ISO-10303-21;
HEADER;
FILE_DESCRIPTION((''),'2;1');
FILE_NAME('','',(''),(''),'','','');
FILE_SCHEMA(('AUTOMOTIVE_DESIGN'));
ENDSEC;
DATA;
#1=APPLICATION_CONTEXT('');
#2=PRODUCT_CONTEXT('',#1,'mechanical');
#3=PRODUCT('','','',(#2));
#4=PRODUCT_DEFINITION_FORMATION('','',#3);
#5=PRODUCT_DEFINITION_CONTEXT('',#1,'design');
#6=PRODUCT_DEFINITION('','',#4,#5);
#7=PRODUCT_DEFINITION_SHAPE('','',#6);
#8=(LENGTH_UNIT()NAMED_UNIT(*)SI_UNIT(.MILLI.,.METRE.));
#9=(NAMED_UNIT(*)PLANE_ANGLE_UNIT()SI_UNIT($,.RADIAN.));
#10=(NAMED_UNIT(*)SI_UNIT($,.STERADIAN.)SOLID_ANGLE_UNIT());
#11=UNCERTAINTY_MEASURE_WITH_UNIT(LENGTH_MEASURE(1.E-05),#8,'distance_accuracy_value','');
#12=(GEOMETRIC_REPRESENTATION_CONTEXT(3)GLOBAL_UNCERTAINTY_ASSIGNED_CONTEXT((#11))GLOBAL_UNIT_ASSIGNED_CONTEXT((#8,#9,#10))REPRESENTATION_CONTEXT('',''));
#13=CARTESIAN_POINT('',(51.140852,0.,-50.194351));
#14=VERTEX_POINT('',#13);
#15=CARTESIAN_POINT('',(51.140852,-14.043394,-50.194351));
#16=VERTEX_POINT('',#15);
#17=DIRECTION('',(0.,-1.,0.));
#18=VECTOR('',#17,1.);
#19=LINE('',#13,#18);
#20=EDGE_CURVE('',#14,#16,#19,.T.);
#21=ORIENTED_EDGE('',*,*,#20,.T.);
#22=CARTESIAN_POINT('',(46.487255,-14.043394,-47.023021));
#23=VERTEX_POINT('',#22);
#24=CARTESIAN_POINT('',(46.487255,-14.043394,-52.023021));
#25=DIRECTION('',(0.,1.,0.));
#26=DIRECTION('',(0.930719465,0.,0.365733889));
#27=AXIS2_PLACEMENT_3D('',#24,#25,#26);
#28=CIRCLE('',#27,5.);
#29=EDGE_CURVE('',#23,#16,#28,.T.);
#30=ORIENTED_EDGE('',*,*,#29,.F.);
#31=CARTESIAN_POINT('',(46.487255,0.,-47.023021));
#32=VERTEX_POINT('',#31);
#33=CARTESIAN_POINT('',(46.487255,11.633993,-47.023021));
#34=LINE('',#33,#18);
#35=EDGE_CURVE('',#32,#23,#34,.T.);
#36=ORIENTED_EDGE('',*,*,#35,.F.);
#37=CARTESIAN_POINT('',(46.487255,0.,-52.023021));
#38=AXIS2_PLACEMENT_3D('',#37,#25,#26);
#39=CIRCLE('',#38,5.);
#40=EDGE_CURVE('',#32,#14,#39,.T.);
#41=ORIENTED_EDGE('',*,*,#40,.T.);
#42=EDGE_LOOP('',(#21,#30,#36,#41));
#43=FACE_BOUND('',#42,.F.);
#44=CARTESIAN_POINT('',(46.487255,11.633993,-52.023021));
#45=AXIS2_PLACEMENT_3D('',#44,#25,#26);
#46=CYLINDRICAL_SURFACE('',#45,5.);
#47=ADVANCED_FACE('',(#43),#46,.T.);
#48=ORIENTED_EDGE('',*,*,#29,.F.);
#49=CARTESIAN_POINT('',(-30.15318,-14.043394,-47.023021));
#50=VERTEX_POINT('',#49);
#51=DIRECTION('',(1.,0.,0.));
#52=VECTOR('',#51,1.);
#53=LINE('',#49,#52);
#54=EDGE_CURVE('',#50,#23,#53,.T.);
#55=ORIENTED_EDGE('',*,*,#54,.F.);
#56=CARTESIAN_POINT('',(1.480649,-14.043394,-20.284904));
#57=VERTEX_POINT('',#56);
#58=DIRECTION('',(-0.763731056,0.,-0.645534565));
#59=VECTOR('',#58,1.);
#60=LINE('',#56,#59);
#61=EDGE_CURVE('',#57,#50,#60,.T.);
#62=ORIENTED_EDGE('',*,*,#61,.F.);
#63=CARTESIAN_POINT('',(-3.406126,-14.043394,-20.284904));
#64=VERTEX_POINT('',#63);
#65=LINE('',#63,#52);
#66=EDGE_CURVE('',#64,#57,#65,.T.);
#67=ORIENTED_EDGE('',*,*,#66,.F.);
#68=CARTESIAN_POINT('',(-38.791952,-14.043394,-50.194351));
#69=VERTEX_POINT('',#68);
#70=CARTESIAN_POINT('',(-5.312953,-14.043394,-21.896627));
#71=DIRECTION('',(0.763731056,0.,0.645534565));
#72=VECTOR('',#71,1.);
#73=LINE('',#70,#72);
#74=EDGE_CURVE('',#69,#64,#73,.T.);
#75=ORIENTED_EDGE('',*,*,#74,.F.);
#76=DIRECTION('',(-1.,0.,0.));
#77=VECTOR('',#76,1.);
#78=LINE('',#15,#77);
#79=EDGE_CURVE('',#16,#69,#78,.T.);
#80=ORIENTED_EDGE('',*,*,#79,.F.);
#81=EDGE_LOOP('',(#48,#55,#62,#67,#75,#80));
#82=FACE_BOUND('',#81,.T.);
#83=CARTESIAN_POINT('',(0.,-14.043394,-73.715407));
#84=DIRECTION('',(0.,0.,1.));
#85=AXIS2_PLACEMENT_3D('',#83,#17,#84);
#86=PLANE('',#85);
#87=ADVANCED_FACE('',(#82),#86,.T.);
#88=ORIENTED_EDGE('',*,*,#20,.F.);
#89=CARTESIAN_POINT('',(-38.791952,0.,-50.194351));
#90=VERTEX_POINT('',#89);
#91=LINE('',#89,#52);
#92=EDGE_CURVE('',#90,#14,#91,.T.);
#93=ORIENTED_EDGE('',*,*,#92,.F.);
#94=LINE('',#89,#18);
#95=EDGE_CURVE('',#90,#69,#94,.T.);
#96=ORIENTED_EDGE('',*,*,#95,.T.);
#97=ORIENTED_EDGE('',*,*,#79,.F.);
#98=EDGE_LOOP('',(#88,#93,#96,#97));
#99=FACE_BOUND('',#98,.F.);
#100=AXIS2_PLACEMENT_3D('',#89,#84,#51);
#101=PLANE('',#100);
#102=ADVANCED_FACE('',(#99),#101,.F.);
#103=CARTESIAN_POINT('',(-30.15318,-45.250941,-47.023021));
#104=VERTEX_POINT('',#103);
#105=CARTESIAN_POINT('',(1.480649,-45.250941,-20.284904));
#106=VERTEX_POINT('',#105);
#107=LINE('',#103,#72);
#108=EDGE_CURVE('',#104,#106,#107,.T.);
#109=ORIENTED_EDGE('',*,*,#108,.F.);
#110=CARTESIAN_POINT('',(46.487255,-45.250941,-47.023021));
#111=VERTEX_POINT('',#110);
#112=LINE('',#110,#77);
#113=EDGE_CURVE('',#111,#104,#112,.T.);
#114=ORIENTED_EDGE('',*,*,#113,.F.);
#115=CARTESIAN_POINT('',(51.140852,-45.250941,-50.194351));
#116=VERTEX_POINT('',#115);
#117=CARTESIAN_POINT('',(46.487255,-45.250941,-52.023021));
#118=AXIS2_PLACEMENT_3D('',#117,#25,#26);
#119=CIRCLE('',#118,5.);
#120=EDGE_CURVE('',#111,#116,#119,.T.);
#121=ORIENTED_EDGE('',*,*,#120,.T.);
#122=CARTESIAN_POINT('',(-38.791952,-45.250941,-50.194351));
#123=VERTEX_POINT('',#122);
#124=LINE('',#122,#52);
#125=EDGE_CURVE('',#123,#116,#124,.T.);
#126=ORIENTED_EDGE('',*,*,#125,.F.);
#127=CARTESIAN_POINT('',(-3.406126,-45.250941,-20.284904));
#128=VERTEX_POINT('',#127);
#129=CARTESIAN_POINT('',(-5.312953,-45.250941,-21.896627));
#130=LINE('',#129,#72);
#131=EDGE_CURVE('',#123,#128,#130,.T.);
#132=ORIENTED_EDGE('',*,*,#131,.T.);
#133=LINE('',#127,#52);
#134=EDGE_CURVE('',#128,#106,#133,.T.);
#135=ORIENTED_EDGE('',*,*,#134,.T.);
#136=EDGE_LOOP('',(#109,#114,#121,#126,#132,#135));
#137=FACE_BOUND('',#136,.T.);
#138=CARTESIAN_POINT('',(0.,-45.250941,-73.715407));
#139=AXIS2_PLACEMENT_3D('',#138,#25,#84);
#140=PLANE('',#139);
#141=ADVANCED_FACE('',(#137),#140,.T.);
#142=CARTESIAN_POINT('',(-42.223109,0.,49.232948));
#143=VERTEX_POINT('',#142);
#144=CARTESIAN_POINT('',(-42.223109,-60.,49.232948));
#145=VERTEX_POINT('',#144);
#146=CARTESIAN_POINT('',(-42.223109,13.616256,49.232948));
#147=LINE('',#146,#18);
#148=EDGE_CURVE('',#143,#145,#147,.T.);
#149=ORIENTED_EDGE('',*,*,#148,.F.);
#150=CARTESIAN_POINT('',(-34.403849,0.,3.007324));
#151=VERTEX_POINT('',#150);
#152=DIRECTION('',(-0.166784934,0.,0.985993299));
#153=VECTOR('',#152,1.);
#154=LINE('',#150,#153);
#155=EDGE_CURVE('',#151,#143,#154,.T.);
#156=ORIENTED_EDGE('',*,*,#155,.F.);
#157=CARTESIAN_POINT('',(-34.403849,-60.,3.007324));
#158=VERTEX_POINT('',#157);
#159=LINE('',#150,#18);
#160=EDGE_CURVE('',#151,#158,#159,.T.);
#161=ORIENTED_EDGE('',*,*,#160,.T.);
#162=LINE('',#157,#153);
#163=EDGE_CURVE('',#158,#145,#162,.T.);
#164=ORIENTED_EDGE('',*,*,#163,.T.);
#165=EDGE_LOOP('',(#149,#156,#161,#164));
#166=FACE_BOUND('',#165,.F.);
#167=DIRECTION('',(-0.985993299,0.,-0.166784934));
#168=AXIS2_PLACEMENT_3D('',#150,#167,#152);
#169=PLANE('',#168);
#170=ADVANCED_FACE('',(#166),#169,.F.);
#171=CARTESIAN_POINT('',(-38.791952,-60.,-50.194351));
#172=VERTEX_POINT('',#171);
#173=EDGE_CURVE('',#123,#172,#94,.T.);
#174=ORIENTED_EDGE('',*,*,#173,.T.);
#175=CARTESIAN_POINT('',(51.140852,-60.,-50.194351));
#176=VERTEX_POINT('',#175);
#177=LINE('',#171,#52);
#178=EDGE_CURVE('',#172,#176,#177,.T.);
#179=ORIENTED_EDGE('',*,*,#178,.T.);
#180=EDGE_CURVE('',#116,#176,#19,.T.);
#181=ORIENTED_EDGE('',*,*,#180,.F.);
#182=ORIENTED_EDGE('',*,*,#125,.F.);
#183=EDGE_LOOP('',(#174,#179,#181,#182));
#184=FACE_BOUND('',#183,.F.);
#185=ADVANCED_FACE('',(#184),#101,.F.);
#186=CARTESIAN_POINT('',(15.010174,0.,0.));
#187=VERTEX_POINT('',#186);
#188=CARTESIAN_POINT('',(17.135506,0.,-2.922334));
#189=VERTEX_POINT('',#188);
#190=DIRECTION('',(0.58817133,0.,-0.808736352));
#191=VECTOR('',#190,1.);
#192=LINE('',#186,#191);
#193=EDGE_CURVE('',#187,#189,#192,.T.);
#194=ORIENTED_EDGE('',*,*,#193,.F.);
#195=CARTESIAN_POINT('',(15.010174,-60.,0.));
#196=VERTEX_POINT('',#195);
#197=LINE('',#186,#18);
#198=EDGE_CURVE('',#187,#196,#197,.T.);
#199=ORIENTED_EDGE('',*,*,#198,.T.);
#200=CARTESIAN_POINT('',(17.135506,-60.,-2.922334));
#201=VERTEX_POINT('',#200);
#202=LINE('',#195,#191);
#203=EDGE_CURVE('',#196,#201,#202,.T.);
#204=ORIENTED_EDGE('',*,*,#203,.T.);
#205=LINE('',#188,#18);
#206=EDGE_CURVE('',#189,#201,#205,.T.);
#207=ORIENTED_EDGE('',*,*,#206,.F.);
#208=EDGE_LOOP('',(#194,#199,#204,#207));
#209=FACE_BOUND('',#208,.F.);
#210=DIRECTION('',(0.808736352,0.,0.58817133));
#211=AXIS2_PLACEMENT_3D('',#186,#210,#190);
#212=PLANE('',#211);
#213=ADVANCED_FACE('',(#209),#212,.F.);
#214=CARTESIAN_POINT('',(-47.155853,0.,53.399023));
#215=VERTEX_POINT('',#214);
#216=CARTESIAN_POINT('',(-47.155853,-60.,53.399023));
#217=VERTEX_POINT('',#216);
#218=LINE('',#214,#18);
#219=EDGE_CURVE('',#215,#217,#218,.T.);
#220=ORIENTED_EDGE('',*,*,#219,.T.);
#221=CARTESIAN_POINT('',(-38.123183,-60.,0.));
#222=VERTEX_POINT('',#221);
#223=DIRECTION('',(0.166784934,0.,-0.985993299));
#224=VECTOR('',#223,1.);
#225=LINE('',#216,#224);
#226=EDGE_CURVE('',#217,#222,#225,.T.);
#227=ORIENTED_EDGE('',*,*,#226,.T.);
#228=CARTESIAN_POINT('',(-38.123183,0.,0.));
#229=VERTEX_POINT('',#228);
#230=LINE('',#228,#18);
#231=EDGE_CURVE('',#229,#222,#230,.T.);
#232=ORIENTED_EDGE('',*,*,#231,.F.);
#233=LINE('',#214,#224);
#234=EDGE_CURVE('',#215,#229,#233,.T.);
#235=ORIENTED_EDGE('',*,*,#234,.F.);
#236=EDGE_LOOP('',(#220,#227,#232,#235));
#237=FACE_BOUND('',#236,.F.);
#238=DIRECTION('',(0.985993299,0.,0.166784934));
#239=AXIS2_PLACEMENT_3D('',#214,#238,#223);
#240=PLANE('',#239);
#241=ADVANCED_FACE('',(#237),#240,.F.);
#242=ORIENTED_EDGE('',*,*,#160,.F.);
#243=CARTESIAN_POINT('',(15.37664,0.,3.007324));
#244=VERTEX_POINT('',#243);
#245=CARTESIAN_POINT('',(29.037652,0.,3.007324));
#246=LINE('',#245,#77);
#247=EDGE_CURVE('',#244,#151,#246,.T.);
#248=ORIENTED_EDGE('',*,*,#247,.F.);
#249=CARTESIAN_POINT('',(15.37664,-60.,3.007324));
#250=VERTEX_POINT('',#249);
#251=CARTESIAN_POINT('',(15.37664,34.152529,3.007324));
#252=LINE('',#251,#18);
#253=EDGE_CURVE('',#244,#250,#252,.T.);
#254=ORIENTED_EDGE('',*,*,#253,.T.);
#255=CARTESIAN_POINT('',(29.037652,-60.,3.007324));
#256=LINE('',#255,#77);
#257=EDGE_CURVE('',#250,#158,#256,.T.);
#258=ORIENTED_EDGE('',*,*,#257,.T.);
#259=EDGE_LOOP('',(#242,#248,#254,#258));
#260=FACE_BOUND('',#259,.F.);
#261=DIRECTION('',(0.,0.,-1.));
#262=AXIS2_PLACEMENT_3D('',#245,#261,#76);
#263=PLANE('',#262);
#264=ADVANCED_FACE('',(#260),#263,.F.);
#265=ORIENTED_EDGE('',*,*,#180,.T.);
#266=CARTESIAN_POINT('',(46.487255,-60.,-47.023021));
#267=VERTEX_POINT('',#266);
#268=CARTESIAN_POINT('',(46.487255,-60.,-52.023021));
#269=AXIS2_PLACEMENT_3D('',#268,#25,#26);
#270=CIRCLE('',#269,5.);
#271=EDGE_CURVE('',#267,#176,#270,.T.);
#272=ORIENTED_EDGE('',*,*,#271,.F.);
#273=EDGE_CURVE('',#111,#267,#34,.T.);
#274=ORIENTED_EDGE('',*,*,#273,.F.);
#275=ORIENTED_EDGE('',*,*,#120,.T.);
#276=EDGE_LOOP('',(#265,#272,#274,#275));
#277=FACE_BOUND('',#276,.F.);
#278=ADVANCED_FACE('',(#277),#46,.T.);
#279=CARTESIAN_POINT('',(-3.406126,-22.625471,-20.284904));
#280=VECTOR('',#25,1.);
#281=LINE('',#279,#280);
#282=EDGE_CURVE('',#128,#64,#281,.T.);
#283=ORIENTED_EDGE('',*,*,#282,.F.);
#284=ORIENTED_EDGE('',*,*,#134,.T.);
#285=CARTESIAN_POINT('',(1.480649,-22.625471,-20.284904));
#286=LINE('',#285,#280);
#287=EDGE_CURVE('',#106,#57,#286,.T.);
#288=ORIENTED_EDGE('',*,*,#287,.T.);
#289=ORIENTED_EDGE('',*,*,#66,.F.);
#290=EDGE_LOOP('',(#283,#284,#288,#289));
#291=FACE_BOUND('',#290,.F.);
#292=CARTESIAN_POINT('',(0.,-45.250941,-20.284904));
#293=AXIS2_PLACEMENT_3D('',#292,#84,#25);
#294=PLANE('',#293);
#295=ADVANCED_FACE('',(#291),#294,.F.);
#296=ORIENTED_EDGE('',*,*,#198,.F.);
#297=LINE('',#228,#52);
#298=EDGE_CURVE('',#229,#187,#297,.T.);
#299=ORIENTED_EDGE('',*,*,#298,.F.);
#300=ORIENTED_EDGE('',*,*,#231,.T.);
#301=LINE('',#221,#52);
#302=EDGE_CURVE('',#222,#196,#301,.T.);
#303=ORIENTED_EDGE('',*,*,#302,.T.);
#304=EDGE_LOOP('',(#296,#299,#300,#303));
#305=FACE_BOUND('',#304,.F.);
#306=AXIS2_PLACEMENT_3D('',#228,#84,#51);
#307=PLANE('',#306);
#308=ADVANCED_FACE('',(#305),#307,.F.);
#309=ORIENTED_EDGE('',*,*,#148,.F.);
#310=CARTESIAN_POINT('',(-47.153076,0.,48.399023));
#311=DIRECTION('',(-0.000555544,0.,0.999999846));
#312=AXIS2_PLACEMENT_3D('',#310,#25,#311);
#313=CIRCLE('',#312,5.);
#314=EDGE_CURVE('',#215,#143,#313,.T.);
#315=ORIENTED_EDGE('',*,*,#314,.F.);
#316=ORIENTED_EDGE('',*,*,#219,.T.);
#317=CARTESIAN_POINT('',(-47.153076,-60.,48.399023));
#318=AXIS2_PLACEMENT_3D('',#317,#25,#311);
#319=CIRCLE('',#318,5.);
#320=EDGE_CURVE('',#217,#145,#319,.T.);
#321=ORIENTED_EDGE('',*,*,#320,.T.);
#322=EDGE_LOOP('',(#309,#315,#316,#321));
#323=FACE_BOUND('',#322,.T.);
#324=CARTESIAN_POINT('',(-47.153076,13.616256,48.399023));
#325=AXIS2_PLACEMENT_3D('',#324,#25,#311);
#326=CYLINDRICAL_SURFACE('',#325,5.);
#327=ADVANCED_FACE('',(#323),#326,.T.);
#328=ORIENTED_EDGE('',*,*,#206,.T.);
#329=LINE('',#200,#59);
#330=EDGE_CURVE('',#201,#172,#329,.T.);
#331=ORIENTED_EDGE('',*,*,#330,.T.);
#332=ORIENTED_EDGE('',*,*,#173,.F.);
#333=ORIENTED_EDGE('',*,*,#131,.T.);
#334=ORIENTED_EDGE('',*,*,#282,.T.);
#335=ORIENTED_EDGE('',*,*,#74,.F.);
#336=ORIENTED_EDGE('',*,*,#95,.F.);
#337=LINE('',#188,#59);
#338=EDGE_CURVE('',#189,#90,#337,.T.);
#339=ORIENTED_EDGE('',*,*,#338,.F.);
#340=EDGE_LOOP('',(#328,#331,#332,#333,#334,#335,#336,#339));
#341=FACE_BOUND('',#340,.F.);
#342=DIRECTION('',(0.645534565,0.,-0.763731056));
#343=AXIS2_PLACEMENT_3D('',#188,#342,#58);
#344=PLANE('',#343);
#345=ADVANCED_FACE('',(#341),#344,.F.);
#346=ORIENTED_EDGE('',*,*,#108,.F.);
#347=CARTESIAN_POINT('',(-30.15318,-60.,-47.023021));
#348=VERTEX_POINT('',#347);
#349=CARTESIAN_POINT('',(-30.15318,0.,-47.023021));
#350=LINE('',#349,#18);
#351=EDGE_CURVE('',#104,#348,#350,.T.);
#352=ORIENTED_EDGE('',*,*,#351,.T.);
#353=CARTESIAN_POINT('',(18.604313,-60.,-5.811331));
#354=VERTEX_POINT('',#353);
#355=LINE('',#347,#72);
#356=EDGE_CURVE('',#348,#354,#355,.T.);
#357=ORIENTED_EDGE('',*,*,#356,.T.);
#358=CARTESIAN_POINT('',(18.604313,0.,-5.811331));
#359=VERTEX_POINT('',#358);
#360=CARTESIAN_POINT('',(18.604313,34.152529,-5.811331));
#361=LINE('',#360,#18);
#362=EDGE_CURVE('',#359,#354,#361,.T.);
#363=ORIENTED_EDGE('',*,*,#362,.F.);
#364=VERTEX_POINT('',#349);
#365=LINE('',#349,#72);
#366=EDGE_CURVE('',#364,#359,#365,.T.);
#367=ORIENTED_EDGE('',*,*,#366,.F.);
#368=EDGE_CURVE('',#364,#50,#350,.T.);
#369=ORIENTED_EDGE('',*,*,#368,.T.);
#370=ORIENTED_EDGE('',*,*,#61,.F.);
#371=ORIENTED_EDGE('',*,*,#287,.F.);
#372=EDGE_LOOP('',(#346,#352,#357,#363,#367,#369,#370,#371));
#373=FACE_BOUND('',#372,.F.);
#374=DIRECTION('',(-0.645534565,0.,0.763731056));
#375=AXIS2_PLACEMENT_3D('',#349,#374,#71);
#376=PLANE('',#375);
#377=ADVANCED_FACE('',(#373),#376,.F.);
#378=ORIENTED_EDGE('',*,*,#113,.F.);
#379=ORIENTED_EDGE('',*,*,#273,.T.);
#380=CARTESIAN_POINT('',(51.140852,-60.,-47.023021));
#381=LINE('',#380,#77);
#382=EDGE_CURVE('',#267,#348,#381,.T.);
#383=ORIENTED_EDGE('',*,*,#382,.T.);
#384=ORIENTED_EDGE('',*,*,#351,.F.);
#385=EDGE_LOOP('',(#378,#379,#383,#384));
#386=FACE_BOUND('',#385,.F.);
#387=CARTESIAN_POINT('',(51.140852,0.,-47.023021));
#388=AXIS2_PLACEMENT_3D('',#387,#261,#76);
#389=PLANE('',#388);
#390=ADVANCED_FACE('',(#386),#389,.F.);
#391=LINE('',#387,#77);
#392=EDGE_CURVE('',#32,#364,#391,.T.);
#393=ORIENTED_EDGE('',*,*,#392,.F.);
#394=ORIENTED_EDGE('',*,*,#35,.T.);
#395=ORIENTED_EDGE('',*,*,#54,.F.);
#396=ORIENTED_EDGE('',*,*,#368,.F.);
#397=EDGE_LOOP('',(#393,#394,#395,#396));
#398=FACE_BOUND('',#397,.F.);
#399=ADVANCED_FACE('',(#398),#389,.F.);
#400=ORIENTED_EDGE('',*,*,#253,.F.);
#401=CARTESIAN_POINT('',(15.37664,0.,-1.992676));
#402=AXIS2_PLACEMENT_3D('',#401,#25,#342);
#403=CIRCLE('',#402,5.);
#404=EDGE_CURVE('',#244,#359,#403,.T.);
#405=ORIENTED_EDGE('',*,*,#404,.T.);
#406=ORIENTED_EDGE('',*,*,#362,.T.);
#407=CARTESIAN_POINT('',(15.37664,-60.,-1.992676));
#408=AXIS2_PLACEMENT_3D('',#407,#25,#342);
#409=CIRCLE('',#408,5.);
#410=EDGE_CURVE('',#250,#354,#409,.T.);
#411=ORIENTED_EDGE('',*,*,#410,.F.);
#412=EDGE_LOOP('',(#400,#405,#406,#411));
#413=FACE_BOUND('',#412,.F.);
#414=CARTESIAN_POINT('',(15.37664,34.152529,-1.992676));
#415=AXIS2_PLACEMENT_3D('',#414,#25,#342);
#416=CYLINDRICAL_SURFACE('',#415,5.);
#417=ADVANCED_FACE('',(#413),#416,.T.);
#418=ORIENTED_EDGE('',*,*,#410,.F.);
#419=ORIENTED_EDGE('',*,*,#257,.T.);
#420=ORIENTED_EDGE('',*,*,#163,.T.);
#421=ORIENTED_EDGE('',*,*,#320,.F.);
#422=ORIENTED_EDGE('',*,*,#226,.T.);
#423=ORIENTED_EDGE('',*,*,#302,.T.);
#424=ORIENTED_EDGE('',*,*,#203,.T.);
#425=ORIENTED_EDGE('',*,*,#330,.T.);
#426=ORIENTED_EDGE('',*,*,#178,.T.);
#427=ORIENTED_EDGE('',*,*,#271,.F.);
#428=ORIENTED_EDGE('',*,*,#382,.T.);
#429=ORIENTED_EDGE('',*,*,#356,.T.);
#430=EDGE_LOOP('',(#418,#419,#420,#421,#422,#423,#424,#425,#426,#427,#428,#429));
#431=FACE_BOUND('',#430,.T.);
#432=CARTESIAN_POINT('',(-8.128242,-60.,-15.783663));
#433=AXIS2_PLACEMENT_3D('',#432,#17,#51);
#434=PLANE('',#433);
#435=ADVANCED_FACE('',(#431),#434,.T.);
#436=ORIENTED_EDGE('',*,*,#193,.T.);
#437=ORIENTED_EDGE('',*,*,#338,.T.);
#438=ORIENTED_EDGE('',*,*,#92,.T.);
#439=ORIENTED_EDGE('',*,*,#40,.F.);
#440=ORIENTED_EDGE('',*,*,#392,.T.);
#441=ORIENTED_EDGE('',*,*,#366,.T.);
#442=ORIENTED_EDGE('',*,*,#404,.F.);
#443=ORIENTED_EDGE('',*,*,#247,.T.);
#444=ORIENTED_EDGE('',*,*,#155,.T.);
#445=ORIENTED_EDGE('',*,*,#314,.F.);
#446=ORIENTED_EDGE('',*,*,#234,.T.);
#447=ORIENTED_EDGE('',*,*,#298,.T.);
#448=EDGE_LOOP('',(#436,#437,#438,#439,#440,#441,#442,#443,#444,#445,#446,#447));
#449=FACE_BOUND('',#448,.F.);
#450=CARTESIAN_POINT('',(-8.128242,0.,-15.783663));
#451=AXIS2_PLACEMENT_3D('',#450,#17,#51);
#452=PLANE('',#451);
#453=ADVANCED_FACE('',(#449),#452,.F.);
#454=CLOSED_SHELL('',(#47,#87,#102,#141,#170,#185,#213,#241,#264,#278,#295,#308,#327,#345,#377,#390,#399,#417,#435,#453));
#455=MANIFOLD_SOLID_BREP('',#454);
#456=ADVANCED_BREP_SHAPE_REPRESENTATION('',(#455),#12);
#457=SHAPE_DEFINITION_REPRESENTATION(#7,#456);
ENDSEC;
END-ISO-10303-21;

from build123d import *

# Parameters (mm, degrees)
F1_DEPTH      = 60
F2_T1_DEPTH   = 128.3050587773
F2_T3_DEPTH   = 87.2325127198
F2_T5_DEPTH   = 83.2679866238
F3_W          = 31.2075465918
F3_H          = 53.4305032343
F4_DEPTH      = 47.1568533609
F4_DEPTH_BACK = 100


# Not quite as in the source:
# - a fillet or chamfer that OpenCascade refuses, or shapes differently, is made with other operations: its cross-section is extruded or revolved along the edge and cut away or added


with BuildPart() as f1:
    # F0 (on Front) → F1 (new body)
    with BuildSketch(Plane.XZ):
        Polygon((-43.1315037153, 54.6031631236), (-47.1558533609, 53.3990226686), (-38.1231829524, 0), (15.0101743639, 0), (17.1355064958, -2.9223344754), (-27.4965111166, -40.6470149755), (-38.7919515192, -50.1943512397), (51.1408522725, -50.1943512397), (51.1408522725, -47.0230206847), (-30.1531795412, -47.0230206847), (19.4947316054, -5.0587160063), (29.0376522148, 3.0073238074), (-34.4038493931, 3.0073238074), align=None)
    extrude(amount=F1_DEPTH)

    # F2: fillet of radius 5 on 3 edges, made by hand

    # F2_s2 → F2_t1 (cut)
    with BuildSketch(Plane.XZ.offset(-34.1525293886)):
        with BuildLine():
            ThreePointArc((18.6043132835, -5.8113314716), (20.0720252356, -0.274141409), (15.3766404593, 3.0073238074))
            Line((15.3766404593, 3.0073238074), (29.0376522148, 3.0073238074))
            Line((29.0376522148, 3.0073238074), (18.6043132835, -5.8113314716))
        make_face()
    extrude(amount=F2_T1_DEPTH, mode=Mode.SUBTRACT)

    # F2_s4 → F2_t3 (cut)
    with BuildSketch(Plane.XZ.offset(-13.6162563599)):
        with BuildLine():
            ThreePointArc((-47.1558533609, 53.3990226686), (-43.9268794892, 52.21892637), (-42.2231091456, 49.2329481124))
            Line((-42.2231091456, 49.2329481124), (-43.1315037153, 54.6031631236))
            Line((-43.1315037153, 54.6031631236), (-47.1558533609, 53.3990226686))
        make_face()
    extrude(amount=F2_T3_DEPTH, mode=Mode.SUBTRACT)

    # F2_s6 → F2_t5 (cut)
    with BuildSketch(Plane.XZ.offset(-11.6339933119)):
        with BuildLine():
            ThreePointArc((51.1408522725, -50.1943512397), (49.3029833415, -47.8912324989), (46.4872549478, -47.0230206847))
            Line((46.4872549478, -47.0230206847), (51.1408522725, -47.0230206847))
            Line((51.1408522725, -47.0230206847), (51.1408522725, -50.1943512397))
        make_face()
    extrude(amount=F2_T5_DEPTH, mode=Mode.SUBTRACT)

    # F3 (on Right) → F4 (cut, two sides)
    with BuildSketch(Plane.YZ) as f4_sk:
        with Locations((-29.6471677721, -47.0001557842)):
            Rectangle(F3_W, F3_H)
    extrude(amount=-F4_DEPTH, mode=Mode.SUBTRACT)
    extrude(f4_sk.sketch, amount=F4_DEPTH_BACK, mode=Mode.SUBTRACT)


solid = f1.part
